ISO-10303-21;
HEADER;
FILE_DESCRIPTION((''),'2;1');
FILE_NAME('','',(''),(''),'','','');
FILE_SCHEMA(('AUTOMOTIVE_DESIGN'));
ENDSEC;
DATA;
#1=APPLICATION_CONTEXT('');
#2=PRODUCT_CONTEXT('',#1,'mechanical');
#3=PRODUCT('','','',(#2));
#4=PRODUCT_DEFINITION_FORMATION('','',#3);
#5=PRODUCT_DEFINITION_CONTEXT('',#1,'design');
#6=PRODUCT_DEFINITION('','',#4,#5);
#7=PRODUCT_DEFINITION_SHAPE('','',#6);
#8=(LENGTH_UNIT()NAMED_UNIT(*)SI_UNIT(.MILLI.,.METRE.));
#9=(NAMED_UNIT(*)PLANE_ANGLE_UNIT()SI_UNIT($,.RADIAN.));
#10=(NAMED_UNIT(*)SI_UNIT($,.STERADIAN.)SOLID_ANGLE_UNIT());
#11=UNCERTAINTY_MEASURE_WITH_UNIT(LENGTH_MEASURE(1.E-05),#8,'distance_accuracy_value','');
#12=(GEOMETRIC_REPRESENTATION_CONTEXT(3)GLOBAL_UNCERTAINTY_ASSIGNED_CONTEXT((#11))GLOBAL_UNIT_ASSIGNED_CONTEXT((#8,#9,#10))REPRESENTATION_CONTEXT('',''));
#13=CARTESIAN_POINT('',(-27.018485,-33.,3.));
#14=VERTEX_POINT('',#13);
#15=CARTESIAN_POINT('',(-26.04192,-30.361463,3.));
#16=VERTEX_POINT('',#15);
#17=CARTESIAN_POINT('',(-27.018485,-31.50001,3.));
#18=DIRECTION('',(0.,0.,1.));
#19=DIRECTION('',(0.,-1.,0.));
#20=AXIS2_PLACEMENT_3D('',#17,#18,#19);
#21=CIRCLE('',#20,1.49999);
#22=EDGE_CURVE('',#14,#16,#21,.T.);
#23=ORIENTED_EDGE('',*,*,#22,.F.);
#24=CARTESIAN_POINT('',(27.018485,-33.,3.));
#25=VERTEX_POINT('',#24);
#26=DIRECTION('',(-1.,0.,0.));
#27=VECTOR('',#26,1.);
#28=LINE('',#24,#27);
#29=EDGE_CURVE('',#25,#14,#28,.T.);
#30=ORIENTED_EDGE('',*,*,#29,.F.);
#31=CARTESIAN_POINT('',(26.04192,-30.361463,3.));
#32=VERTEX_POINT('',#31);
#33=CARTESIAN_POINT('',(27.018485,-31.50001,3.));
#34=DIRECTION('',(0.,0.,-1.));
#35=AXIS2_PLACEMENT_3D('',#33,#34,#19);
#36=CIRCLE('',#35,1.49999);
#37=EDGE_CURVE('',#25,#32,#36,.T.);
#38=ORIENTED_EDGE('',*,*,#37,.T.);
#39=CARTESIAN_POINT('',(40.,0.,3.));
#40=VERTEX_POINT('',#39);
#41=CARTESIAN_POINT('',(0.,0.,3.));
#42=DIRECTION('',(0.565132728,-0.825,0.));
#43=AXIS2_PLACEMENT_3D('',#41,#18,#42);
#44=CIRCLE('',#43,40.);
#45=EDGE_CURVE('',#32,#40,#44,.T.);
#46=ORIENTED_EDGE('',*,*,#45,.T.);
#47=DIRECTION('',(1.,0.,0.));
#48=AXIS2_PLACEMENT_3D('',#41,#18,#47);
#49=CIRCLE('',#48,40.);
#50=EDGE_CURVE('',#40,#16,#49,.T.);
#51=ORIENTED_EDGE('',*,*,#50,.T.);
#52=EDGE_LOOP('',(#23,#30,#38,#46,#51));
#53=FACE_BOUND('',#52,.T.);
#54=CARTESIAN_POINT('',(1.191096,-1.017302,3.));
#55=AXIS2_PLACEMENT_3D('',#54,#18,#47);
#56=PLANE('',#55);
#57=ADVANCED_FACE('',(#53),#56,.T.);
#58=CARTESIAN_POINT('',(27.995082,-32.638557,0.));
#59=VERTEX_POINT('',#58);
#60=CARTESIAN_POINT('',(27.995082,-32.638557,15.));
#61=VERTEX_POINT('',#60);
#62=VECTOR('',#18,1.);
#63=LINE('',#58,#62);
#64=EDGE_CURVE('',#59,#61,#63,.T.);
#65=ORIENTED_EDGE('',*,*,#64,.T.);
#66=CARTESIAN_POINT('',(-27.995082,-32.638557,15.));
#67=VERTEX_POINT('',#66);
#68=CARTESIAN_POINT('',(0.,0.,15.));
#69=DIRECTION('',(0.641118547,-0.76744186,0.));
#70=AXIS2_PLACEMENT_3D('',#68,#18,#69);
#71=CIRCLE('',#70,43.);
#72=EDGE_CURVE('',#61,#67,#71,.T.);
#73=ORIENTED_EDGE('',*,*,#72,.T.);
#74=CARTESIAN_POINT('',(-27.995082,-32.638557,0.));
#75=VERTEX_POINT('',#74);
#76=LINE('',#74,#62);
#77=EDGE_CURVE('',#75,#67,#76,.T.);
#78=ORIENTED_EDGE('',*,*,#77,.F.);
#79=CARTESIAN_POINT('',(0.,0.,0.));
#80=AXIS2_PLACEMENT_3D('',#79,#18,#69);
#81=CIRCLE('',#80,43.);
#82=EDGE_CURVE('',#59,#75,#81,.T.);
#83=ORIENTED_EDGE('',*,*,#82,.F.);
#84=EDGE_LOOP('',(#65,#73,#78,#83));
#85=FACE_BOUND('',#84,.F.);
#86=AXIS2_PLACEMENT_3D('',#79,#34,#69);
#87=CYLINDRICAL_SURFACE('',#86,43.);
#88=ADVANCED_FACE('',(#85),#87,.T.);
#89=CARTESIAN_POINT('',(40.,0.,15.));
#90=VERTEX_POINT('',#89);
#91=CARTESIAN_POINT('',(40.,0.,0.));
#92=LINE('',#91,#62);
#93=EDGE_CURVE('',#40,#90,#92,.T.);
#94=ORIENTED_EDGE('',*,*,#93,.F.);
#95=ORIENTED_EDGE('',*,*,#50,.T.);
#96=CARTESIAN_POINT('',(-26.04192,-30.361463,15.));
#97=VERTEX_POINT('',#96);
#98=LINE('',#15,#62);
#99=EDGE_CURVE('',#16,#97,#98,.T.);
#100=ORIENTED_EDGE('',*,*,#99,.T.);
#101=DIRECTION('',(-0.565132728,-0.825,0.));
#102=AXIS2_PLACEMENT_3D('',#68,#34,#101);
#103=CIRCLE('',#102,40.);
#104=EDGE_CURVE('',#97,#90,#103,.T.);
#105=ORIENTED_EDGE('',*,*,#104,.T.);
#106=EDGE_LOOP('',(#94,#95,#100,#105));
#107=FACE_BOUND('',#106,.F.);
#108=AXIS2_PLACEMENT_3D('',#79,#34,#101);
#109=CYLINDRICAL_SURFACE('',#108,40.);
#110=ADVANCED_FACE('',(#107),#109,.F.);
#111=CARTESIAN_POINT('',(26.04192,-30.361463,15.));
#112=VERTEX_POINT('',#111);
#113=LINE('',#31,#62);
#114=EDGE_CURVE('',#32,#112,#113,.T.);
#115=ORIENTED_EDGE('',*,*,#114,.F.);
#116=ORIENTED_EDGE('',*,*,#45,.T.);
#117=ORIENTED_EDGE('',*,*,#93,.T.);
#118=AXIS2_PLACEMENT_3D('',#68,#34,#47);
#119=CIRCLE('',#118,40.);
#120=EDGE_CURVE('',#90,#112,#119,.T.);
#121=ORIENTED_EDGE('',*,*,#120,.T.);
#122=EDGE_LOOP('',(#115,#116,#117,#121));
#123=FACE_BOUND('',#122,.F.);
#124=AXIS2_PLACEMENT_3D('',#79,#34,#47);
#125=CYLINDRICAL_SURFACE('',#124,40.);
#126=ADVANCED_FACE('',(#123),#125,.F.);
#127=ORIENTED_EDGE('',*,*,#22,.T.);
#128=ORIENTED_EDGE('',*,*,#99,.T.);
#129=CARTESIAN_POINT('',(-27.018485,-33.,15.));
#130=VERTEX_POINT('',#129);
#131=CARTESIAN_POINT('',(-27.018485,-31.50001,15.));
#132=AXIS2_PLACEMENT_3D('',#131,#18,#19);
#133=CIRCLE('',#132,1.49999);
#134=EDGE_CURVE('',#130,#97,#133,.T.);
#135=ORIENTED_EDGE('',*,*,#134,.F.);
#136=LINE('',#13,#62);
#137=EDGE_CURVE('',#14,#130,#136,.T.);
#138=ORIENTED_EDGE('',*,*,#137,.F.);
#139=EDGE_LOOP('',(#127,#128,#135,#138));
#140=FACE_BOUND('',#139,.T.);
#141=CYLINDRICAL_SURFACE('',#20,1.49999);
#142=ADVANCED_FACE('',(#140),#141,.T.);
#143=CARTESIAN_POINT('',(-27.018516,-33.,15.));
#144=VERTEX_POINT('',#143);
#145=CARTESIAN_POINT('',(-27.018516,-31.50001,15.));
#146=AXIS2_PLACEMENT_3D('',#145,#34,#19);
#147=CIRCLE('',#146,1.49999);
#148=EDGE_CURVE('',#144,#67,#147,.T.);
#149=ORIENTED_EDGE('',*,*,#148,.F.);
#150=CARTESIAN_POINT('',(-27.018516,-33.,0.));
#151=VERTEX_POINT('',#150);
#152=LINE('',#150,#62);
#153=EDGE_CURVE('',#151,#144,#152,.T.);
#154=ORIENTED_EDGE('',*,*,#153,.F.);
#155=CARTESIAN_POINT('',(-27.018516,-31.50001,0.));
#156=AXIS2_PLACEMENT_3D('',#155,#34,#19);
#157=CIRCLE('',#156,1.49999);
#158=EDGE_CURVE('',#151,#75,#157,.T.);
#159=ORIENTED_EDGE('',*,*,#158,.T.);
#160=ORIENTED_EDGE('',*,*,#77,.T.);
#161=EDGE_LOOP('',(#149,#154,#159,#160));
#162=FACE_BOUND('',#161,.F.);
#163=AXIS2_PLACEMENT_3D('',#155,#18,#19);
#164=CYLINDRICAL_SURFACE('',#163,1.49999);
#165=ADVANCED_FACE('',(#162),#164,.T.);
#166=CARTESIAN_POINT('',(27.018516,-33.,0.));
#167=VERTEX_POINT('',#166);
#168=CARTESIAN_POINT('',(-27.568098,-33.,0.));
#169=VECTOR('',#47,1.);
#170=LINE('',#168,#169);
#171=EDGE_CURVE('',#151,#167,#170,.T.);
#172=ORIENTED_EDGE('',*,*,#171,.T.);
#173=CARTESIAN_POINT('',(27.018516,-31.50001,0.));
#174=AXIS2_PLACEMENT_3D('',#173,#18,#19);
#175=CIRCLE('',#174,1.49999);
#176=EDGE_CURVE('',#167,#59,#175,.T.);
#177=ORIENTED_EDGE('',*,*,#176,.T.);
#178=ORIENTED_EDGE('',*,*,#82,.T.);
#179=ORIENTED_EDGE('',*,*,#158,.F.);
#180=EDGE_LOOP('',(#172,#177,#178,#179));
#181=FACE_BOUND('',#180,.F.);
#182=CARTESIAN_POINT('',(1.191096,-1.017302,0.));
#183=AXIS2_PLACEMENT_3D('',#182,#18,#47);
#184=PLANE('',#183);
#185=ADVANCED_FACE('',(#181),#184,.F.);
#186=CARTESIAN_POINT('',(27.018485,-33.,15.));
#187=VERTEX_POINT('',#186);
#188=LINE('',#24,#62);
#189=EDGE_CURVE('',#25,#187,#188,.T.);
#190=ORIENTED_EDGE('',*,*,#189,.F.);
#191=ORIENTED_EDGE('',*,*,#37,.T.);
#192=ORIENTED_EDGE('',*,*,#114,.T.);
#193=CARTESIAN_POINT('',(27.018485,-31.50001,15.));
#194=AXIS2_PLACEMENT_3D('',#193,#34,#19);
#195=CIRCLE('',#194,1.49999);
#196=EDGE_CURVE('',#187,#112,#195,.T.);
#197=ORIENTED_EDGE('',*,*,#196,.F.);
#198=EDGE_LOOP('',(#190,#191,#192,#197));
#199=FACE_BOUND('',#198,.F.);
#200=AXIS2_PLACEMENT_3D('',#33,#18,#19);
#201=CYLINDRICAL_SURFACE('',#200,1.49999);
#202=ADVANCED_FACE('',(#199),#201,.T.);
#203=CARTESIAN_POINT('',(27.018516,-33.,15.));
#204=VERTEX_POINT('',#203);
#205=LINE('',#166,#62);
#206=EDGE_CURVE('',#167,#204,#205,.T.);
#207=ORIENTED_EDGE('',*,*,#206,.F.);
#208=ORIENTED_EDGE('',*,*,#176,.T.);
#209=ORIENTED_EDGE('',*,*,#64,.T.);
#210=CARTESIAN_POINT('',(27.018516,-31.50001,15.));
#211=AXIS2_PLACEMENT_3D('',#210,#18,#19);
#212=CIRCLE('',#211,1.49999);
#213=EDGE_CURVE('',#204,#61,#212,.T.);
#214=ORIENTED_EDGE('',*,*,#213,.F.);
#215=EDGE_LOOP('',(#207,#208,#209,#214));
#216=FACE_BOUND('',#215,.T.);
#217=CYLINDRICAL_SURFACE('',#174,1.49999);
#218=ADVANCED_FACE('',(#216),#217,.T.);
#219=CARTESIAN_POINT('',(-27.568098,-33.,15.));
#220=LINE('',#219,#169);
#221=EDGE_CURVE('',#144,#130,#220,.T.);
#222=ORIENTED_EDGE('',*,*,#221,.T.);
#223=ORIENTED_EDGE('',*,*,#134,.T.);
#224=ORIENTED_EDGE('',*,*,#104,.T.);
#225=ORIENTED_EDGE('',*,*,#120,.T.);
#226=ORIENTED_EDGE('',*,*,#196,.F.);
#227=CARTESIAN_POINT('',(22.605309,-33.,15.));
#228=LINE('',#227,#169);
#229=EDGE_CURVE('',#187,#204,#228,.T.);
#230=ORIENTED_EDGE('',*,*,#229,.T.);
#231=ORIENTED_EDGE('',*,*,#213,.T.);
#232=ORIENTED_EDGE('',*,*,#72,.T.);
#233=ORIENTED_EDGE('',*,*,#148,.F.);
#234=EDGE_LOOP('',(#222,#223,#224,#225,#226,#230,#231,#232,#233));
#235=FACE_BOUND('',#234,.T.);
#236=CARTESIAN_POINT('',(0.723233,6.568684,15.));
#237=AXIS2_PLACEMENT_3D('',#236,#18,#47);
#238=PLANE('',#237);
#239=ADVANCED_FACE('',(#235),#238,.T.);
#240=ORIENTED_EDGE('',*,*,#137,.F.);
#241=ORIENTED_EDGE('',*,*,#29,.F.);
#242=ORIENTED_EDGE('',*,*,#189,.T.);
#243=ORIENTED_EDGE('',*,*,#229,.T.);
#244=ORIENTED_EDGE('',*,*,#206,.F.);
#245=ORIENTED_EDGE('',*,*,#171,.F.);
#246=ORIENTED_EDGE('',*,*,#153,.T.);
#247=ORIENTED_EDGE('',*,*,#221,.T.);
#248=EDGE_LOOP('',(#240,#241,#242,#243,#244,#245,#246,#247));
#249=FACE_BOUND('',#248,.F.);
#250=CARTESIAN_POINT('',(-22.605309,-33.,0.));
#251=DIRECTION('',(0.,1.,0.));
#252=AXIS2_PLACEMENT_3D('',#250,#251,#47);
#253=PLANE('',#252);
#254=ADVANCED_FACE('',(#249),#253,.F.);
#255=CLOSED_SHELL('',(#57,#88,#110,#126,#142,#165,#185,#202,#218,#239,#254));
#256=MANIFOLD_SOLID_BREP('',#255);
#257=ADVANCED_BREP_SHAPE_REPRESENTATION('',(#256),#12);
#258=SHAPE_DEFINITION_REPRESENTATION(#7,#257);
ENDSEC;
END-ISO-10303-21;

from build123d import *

# Parameters (mm, degrees)
F1_DEPTH = 15
F2_DEPTH = 3
F3_R     = 1.49999


# Not quite as in the source:
# - a fillet or chamfer is up to 0.001 mm smaller than in the source, because OpenCascade refuses the exact size


with BuildPart() as f1:
    # F0 (on Top) → F1 (new body)
    with BuildSketch(Plane.XY):
        with BuildLine():
            ThreePointArc((-22.6053091109, -33), (-18.6519119069, 35.3851124376), (40, 0))
            ThreePointArc((40, 0), (35.3851124376, -18.6519119069), (22.6053091109, -33))
            Line((22.6053091109, -33), (27.5680975042, -33))
            ThreePointArc((27.5680975042, -33), (38.9514325326, -18.2149911792), (43, 0))
            ThreePointArc((43, 0), (-18.2149911792, 38.9514325326), (-27.5680975042, -33))
            Line((-27.5680975042, -33), (-22.6053091109, -33))
        make_face()
    extrude(amount=F1_DEPTH)

    # F0 (on Top) → F2 (join)
    with BuildSketch(Plane.XY):
        with BuildLine():
            ThreePointArc((22.6053091109, -33), (35.3851124376, -18.6519119069), (40, 0))
            ThreePointArc((40, 0), (-18.6519119069, 35.3851124376), (-22.6053091109, -33))
            Line((-22.6053091109, -33), (22.6053091109, -33))
        make_face()
    extrude(amount=F2_DEPTH)

    # F3 (radius 1.5 in the source; OpenCascade refuses exactly that, so slightly less here)
    f3_edges = [f1.edges().sort_by_distance(p)[0] for p in [
        (-22.605309, -33, 9),
        (22.605309, -33, 9),
        (-27.568098, -33, 7.5),
        (27.568098, -33, 7.5),
    ]]
    fillet(f3_edges, radius=F3_R)


solid = f1.part
